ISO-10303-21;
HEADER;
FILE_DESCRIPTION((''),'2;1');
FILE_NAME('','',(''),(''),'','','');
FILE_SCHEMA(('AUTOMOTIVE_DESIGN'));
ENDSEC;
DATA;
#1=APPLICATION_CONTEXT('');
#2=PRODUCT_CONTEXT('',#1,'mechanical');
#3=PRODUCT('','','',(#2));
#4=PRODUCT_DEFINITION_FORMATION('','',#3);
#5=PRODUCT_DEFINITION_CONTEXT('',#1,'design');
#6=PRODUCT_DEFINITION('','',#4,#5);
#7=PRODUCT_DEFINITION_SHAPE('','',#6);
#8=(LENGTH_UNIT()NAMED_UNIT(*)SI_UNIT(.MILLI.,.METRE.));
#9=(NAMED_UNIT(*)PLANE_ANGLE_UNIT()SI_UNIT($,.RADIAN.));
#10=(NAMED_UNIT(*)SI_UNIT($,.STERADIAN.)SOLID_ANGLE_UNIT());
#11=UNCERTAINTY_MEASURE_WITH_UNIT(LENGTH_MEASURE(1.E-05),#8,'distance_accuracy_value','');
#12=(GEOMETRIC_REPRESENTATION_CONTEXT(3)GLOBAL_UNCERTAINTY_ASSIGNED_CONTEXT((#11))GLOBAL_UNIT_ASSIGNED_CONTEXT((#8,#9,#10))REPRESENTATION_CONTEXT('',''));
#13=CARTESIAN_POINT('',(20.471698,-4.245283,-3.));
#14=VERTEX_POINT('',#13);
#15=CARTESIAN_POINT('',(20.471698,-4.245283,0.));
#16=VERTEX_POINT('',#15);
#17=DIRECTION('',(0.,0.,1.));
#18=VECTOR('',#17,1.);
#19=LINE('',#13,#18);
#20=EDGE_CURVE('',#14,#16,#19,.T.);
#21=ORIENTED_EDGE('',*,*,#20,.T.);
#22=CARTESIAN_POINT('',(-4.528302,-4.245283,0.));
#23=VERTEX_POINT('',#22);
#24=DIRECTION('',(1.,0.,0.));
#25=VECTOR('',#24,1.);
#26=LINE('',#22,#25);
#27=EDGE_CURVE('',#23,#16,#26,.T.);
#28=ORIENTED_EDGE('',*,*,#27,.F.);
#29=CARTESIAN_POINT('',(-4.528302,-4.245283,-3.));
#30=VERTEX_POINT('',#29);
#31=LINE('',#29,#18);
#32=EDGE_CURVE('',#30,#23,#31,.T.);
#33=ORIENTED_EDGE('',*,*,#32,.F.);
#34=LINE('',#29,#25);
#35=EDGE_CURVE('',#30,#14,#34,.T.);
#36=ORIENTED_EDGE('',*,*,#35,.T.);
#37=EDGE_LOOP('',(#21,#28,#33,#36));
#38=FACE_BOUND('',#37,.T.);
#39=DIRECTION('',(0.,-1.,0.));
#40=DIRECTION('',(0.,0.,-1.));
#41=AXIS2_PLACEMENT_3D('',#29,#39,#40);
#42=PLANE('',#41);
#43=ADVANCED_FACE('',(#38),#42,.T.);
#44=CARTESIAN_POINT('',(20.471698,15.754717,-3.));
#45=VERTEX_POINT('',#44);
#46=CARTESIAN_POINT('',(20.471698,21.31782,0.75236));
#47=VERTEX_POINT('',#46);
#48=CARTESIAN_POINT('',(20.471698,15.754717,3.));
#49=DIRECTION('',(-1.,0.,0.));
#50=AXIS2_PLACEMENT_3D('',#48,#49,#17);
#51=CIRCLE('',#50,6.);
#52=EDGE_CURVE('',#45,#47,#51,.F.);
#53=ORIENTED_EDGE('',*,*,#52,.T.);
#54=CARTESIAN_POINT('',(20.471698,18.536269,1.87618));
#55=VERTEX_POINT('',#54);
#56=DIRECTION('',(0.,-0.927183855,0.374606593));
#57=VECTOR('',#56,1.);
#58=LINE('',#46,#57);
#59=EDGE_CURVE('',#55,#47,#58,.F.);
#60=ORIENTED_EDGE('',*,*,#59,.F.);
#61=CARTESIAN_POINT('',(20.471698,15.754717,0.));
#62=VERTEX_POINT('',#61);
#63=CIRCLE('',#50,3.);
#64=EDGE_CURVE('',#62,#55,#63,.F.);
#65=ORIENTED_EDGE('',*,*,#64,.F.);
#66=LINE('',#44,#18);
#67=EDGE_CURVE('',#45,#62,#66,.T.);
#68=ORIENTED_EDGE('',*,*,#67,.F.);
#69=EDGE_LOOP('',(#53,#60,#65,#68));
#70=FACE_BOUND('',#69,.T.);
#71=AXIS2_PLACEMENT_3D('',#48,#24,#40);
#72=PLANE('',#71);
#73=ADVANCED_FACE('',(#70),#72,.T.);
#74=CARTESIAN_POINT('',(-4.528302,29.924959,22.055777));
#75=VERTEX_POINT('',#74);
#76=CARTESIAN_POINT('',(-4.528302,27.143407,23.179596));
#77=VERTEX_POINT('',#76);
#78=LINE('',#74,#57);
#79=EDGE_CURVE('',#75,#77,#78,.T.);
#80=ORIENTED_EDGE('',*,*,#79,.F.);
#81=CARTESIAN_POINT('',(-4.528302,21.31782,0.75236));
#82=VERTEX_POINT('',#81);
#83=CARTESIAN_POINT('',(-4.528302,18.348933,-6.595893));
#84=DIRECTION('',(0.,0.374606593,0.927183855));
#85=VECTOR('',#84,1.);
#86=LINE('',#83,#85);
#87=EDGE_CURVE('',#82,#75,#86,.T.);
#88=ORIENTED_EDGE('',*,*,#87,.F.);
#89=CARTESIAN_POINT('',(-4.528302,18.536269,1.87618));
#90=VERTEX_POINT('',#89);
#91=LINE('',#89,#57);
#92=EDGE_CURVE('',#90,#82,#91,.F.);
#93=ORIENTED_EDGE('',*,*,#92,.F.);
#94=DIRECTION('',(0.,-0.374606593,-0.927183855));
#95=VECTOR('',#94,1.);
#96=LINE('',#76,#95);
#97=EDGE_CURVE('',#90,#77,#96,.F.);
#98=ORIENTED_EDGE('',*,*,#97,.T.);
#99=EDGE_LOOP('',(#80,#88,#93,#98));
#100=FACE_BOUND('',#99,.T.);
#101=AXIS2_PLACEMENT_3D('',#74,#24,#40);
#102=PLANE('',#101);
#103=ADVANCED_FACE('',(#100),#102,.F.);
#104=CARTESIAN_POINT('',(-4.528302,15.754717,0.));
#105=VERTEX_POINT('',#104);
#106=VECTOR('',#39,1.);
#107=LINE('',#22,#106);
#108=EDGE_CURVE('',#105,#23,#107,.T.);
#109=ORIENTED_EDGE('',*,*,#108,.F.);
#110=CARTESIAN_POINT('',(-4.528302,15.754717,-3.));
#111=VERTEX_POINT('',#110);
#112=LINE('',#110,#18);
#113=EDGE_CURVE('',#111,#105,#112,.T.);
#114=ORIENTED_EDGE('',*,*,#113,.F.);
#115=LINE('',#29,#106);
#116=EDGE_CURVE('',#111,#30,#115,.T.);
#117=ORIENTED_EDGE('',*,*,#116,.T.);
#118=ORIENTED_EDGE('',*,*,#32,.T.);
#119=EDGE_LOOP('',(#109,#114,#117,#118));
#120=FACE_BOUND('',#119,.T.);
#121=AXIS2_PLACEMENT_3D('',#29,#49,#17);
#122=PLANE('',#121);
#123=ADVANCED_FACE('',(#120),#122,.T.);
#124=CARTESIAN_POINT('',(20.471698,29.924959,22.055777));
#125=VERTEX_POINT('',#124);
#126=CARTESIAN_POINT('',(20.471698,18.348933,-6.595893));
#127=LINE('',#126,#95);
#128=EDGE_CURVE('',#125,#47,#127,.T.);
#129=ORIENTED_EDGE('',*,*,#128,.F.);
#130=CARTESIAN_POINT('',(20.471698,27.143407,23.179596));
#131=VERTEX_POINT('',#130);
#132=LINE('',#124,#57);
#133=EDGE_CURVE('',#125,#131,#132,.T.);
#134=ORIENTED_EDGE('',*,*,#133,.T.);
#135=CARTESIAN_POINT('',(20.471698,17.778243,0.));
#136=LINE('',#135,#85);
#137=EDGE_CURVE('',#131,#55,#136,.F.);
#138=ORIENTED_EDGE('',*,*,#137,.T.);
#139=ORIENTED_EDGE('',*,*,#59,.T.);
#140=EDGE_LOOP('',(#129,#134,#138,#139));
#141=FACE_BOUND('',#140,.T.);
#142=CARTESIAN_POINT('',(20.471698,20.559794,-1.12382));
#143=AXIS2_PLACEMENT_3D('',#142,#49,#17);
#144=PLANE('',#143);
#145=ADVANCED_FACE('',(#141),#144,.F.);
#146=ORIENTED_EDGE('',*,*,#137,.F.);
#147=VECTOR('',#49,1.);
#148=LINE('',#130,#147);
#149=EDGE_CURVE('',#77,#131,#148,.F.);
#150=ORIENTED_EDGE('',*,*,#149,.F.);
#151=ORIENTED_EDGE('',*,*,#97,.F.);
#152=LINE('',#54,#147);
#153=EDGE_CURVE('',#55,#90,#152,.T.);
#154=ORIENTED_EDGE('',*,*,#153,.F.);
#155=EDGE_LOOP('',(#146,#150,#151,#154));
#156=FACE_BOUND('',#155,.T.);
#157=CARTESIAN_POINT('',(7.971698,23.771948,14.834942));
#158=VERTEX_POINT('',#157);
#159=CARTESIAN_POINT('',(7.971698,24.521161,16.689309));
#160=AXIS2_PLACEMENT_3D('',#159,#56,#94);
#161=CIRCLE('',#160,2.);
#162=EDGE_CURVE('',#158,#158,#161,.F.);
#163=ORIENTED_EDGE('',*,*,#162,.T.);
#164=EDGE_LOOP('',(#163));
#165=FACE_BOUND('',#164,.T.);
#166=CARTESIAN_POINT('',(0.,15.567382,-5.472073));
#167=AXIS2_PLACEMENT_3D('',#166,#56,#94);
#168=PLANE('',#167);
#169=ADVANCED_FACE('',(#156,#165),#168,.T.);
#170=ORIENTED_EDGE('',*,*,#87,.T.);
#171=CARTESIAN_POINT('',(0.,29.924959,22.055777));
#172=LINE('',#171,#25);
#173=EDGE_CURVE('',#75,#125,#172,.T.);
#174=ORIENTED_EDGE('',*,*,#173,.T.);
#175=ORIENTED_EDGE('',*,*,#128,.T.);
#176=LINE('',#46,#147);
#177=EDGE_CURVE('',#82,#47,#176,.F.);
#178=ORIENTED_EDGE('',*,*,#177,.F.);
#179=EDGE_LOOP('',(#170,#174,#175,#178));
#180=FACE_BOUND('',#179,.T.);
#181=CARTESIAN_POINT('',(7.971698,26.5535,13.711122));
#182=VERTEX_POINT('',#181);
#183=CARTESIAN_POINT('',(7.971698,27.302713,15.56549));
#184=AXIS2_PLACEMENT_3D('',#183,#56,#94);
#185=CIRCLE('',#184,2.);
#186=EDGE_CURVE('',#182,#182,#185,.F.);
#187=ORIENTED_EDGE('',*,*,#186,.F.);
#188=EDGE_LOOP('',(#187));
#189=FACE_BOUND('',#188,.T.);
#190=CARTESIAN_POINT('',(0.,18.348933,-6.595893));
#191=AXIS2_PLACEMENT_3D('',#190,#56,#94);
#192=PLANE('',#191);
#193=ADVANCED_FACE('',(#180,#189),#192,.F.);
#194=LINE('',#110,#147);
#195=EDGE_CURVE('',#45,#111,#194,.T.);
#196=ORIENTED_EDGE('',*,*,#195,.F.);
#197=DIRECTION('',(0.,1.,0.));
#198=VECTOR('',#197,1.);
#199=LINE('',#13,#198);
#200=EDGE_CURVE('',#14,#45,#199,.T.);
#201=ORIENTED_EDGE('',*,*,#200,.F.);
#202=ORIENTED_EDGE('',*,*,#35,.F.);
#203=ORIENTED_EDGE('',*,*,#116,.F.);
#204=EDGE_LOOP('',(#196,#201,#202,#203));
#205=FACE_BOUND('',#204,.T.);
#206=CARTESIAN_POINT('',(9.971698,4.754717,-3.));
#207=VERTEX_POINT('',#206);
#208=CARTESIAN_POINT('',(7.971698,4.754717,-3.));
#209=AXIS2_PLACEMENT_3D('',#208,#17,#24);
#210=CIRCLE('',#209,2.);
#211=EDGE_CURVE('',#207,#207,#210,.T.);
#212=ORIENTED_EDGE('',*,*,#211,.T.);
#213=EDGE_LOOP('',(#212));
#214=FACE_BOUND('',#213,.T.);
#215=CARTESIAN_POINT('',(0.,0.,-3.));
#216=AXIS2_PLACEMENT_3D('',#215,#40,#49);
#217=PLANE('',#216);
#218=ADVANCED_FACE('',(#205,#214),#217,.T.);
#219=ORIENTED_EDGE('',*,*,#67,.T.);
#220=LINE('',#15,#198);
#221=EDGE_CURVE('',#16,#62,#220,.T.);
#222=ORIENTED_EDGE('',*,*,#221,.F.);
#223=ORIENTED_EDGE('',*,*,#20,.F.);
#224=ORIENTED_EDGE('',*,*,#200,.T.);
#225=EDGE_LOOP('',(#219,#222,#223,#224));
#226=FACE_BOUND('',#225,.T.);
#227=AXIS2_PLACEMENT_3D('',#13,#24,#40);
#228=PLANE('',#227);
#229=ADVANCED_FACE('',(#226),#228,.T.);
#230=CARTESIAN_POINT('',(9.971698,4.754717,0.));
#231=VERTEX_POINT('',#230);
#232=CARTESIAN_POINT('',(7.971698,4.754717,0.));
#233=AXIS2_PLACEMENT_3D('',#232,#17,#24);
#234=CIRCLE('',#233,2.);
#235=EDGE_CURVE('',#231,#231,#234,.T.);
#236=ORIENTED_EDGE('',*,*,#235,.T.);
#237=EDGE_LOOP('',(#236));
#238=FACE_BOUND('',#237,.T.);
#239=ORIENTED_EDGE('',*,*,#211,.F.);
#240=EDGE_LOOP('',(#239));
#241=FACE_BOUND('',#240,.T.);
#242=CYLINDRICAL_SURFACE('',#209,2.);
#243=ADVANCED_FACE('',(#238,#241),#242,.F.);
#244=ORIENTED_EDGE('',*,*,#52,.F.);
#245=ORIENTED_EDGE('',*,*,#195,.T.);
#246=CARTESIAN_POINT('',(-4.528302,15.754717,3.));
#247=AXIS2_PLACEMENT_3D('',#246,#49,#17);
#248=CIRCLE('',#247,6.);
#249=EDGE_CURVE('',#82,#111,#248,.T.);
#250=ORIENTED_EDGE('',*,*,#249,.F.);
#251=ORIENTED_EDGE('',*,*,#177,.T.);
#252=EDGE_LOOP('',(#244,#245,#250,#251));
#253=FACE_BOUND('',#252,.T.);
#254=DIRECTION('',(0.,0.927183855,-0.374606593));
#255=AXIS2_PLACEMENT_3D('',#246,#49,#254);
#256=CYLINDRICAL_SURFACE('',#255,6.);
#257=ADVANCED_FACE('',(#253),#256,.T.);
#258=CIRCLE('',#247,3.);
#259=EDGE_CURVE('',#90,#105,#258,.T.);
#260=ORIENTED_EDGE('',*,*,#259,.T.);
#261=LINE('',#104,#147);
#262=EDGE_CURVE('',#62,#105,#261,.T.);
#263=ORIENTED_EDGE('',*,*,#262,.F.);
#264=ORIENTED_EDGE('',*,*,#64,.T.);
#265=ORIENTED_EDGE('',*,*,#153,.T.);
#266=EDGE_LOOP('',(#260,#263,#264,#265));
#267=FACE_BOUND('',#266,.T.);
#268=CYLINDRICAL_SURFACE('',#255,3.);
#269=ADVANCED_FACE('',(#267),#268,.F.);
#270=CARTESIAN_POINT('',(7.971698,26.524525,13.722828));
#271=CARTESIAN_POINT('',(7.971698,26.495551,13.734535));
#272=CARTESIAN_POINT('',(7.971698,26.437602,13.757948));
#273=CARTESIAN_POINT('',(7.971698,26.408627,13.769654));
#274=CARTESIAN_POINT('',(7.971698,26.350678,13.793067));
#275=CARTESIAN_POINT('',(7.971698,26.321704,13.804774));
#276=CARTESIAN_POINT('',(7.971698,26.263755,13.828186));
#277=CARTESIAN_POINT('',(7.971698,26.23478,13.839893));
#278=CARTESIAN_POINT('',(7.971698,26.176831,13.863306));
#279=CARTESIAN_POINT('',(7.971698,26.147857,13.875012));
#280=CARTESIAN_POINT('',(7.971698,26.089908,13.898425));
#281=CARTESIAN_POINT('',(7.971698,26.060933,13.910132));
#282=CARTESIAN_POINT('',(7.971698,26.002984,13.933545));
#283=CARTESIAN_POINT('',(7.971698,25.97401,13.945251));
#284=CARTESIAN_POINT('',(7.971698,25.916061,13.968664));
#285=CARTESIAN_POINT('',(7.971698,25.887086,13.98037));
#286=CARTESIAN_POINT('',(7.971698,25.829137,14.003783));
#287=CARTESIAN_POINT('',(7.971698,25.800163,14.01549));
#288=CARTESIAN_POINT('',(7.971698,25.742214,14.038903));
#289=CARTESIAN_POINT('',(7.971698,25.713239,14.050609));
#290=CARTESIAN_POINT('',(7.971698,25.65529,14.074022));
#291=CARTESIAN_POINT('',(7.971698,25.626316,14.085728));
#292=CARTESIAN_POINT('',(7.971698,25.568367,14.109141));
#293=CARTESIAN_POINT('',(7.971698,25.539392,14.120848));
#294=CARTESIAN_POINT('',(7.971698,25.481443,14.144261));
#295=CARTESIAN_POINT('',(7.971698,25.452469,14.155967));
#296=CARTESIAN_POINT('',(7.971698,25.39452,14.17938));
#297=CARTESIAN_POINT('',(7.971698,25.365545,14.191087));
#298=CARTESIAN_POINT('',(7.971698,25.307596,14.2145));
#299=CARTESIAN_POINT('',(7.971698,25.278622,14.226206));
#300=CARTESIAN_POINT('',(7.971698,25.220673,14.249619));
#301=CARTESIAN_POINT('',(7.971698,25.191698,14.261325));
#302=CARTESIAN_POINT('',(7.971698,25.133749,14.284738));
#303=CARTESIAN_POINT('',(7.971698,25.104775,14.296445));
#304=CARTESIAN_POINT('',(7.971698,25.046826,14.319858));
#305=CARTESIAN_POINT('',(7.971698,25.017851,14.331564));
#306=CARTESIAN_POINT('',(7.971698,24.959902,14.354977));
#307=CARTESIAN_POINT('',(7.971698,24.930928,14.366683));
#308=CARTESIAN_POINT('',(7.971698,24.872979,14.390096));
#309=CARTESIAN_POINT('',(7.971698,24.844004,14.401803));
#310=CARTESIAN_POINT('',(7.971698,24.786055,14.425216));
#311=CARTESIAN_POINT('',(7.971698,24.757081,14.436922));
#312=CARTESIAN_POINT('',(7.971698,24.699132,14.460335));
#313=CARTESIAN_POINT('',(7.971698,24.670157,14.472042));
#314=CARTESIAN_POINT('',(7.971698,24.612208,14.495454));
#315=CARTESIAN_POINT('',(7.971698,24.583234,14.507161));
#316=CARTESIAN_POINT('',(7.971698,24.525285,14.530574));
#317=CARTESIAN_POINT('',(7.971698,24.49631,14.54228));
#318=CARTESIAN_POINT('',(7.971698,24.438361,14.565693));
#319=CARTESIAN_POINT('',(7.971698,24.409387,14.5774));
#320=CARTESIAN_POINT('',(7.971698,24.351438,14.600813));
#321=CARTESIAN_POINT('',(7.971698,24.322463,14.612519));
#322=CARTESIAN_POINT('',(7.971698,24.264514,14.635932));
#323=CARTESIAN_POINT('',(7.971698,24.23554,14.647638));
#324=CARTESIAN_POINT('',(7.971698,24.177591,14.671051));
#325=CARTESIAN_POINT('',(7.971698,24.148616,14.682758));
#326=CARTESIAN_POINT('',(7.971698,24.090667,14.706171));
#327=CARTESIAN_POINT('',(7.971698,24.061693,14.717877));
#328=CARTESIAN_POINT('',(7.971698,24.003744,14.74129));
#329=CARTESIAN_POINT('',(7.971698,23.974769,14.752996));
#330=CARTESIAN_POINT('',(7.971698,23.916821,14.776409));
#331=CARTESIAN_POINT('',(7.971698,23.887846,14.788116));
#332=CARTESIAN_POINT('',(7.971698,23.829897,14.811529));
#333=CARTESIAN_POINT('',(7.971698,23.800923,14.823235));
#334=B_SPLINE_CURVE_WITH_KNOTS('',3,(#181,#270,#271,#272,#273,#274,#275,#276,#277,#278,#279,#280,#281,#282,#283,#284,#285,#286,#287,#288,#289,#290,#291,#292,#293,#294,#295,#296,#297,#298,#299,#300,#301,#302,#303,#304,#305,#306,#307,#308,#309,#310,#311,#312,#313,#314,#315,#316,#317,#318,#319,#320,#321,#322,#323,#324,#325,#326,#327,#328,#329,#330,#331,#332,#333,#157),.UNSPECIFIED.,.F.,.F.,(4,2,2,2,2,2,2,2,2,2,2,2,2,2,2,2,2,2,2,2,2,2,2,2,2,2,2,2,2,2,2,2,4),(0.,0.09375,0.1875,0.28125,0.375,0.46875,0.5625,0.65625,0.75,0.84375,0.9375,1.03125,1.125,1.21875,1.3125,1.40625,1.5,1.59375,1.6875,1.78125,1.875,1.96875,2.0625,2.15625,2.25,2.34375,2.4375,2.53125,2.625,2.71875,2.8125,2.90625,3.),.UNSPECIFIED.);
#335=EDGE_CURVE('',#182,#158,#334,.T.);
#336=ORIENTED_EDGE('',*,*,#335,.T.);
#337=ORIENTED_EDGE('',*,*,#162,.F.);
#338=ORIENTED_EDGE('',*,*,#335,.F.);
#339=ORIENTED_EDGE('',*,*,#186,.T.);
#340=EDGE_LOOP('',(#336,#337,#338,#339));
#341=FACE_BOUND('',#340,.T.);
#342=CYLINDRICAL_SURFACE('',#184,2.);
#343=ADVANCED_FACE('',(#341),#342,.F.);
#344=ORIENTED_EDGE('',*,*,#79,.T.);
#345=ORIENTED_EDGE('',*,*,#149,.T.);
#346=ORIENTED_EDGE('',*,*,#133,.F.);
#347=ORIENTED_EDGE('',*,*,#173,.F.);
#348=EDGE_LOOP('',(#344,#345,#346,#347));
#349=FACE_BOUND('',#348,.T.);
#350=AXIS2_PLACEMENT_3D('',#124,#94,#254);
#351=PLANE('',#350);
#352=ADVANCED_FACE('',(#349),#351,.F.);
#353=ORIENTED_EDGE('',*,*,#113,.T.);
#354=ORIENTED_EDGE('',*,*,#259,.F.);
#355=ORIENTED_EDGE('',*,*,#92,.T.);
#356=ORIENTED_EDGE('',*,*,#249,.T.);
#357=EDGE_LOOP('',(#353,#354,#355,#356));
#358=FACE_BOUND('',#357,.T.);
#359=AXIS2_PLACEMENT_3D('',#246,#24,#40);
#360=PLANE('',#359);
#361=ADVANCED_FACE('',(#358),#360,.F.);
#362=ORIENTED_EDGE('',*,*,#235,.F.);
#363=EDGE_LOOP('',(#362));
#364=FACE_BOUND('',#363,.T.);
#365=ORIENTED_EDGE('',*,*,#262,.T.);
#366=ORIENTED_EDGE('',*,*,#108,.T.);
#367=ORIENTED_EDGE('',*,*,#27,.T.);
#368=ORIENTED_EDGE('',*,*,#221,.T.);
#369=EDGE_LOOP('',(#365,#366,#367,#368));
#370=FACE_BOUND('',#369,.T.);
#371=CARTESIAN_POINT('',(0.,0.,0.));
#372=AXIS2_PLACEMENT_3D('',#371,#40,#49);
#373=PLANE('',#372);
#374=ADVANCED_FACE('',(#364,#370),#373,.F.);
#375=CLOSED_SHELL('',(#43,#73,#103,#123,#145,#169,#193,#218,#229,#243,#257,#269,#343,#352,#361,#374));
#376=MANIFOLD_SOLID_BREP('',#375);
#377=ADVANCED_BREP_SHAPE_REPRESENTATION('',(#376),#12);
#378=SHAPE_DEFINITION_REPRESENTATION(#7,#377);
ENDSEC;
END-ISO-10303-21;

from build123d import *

# Parameters (mm, degrees)
SKETCH1_W               = 25
SKETCH1_H               = 20
SKETCH1_R               = 2
BASE_FLANGE1_DEPTH      = 3
EDGE_FLANGE1_DEPTH      = 25
EDGE_FLANGE1_START      = 3
EDGE_FLANGE1_PROFILE_W  = 25
EDGE_FLANGE1_PROFILE_H  = 22.976474449
EDGE_FLANGE1_PROFILE_R  = 2
EDGE_FLANGE1_FLAT_DEPTH = 3


# Sheet-metal steps are written as plain solids
with BuildPart() as part:
    # Sketch1 → Base-Flange1 (new body)
    with BuildSketch(Plane.XY):
        with Locations((7.971698113, 5.754716981)):
            Rectangle(SKETCH1_W, SKETCH1_H)
        with Locations((7.971698113, 4.754716981)):
            Circle(SKETCH1_R, mode=Mode.SUBTRACT)
    extrude(amount=-BASE_FLANGE1_DEPTH)

    # Edge-Flange1 bend section (across the edge) → Edge-Flange1 (add)
    with BuildSketch(Plane(origin=(20.471698113, 17.778242532, 0), x_dir=(0, -0.9271838545667858, 0.3746065934159162), z_dir=(-1, 0, 0))):
        with BuildLine():
            Line((-3, 2.023525551), (0, 2.023525551))
            ThreePointArc((0, 2.023525551), (0.512887282, 0.34594684), (1.87618022, -0.758026013))
            Line((1.87618022, -0.758026013), (0.75236044, -3.539577577))
            ThreePointArc((0.75236044, -3.539577577), (-1.974225435, -1.33163187), (-3, 2.023525551))
        make_face()
    extrude(amount=EDGE_FLANGE1_DEPTH)

    # Edge-Flange1 profile (on flange) → Edge-Flange1 flat (add)
    with BuildSketch(Plane(origin=(0, 17.778242532, 0), x_dir=(-1, 0, 0), z_dir=(0, 0.9271838545667858, -0.3746065934159162)).offset(EDGE_FLANGE1_START)):
        with Locations((-7.971698113, 13.511762775)):
            Rectangle(EDGE_FLANGE1_PROFILE_W, EDGE_FLANGE1_PROFILE_H)
        with Locations((-7.971698113, 18)):
            Circle(EDGE_FLANGE1_PROFILE_R, mode=Mode.SUBTRACT)
    extrude(amount=-EDGE_FLANGE1_FLAT_DEPTH)


solid = part.part
